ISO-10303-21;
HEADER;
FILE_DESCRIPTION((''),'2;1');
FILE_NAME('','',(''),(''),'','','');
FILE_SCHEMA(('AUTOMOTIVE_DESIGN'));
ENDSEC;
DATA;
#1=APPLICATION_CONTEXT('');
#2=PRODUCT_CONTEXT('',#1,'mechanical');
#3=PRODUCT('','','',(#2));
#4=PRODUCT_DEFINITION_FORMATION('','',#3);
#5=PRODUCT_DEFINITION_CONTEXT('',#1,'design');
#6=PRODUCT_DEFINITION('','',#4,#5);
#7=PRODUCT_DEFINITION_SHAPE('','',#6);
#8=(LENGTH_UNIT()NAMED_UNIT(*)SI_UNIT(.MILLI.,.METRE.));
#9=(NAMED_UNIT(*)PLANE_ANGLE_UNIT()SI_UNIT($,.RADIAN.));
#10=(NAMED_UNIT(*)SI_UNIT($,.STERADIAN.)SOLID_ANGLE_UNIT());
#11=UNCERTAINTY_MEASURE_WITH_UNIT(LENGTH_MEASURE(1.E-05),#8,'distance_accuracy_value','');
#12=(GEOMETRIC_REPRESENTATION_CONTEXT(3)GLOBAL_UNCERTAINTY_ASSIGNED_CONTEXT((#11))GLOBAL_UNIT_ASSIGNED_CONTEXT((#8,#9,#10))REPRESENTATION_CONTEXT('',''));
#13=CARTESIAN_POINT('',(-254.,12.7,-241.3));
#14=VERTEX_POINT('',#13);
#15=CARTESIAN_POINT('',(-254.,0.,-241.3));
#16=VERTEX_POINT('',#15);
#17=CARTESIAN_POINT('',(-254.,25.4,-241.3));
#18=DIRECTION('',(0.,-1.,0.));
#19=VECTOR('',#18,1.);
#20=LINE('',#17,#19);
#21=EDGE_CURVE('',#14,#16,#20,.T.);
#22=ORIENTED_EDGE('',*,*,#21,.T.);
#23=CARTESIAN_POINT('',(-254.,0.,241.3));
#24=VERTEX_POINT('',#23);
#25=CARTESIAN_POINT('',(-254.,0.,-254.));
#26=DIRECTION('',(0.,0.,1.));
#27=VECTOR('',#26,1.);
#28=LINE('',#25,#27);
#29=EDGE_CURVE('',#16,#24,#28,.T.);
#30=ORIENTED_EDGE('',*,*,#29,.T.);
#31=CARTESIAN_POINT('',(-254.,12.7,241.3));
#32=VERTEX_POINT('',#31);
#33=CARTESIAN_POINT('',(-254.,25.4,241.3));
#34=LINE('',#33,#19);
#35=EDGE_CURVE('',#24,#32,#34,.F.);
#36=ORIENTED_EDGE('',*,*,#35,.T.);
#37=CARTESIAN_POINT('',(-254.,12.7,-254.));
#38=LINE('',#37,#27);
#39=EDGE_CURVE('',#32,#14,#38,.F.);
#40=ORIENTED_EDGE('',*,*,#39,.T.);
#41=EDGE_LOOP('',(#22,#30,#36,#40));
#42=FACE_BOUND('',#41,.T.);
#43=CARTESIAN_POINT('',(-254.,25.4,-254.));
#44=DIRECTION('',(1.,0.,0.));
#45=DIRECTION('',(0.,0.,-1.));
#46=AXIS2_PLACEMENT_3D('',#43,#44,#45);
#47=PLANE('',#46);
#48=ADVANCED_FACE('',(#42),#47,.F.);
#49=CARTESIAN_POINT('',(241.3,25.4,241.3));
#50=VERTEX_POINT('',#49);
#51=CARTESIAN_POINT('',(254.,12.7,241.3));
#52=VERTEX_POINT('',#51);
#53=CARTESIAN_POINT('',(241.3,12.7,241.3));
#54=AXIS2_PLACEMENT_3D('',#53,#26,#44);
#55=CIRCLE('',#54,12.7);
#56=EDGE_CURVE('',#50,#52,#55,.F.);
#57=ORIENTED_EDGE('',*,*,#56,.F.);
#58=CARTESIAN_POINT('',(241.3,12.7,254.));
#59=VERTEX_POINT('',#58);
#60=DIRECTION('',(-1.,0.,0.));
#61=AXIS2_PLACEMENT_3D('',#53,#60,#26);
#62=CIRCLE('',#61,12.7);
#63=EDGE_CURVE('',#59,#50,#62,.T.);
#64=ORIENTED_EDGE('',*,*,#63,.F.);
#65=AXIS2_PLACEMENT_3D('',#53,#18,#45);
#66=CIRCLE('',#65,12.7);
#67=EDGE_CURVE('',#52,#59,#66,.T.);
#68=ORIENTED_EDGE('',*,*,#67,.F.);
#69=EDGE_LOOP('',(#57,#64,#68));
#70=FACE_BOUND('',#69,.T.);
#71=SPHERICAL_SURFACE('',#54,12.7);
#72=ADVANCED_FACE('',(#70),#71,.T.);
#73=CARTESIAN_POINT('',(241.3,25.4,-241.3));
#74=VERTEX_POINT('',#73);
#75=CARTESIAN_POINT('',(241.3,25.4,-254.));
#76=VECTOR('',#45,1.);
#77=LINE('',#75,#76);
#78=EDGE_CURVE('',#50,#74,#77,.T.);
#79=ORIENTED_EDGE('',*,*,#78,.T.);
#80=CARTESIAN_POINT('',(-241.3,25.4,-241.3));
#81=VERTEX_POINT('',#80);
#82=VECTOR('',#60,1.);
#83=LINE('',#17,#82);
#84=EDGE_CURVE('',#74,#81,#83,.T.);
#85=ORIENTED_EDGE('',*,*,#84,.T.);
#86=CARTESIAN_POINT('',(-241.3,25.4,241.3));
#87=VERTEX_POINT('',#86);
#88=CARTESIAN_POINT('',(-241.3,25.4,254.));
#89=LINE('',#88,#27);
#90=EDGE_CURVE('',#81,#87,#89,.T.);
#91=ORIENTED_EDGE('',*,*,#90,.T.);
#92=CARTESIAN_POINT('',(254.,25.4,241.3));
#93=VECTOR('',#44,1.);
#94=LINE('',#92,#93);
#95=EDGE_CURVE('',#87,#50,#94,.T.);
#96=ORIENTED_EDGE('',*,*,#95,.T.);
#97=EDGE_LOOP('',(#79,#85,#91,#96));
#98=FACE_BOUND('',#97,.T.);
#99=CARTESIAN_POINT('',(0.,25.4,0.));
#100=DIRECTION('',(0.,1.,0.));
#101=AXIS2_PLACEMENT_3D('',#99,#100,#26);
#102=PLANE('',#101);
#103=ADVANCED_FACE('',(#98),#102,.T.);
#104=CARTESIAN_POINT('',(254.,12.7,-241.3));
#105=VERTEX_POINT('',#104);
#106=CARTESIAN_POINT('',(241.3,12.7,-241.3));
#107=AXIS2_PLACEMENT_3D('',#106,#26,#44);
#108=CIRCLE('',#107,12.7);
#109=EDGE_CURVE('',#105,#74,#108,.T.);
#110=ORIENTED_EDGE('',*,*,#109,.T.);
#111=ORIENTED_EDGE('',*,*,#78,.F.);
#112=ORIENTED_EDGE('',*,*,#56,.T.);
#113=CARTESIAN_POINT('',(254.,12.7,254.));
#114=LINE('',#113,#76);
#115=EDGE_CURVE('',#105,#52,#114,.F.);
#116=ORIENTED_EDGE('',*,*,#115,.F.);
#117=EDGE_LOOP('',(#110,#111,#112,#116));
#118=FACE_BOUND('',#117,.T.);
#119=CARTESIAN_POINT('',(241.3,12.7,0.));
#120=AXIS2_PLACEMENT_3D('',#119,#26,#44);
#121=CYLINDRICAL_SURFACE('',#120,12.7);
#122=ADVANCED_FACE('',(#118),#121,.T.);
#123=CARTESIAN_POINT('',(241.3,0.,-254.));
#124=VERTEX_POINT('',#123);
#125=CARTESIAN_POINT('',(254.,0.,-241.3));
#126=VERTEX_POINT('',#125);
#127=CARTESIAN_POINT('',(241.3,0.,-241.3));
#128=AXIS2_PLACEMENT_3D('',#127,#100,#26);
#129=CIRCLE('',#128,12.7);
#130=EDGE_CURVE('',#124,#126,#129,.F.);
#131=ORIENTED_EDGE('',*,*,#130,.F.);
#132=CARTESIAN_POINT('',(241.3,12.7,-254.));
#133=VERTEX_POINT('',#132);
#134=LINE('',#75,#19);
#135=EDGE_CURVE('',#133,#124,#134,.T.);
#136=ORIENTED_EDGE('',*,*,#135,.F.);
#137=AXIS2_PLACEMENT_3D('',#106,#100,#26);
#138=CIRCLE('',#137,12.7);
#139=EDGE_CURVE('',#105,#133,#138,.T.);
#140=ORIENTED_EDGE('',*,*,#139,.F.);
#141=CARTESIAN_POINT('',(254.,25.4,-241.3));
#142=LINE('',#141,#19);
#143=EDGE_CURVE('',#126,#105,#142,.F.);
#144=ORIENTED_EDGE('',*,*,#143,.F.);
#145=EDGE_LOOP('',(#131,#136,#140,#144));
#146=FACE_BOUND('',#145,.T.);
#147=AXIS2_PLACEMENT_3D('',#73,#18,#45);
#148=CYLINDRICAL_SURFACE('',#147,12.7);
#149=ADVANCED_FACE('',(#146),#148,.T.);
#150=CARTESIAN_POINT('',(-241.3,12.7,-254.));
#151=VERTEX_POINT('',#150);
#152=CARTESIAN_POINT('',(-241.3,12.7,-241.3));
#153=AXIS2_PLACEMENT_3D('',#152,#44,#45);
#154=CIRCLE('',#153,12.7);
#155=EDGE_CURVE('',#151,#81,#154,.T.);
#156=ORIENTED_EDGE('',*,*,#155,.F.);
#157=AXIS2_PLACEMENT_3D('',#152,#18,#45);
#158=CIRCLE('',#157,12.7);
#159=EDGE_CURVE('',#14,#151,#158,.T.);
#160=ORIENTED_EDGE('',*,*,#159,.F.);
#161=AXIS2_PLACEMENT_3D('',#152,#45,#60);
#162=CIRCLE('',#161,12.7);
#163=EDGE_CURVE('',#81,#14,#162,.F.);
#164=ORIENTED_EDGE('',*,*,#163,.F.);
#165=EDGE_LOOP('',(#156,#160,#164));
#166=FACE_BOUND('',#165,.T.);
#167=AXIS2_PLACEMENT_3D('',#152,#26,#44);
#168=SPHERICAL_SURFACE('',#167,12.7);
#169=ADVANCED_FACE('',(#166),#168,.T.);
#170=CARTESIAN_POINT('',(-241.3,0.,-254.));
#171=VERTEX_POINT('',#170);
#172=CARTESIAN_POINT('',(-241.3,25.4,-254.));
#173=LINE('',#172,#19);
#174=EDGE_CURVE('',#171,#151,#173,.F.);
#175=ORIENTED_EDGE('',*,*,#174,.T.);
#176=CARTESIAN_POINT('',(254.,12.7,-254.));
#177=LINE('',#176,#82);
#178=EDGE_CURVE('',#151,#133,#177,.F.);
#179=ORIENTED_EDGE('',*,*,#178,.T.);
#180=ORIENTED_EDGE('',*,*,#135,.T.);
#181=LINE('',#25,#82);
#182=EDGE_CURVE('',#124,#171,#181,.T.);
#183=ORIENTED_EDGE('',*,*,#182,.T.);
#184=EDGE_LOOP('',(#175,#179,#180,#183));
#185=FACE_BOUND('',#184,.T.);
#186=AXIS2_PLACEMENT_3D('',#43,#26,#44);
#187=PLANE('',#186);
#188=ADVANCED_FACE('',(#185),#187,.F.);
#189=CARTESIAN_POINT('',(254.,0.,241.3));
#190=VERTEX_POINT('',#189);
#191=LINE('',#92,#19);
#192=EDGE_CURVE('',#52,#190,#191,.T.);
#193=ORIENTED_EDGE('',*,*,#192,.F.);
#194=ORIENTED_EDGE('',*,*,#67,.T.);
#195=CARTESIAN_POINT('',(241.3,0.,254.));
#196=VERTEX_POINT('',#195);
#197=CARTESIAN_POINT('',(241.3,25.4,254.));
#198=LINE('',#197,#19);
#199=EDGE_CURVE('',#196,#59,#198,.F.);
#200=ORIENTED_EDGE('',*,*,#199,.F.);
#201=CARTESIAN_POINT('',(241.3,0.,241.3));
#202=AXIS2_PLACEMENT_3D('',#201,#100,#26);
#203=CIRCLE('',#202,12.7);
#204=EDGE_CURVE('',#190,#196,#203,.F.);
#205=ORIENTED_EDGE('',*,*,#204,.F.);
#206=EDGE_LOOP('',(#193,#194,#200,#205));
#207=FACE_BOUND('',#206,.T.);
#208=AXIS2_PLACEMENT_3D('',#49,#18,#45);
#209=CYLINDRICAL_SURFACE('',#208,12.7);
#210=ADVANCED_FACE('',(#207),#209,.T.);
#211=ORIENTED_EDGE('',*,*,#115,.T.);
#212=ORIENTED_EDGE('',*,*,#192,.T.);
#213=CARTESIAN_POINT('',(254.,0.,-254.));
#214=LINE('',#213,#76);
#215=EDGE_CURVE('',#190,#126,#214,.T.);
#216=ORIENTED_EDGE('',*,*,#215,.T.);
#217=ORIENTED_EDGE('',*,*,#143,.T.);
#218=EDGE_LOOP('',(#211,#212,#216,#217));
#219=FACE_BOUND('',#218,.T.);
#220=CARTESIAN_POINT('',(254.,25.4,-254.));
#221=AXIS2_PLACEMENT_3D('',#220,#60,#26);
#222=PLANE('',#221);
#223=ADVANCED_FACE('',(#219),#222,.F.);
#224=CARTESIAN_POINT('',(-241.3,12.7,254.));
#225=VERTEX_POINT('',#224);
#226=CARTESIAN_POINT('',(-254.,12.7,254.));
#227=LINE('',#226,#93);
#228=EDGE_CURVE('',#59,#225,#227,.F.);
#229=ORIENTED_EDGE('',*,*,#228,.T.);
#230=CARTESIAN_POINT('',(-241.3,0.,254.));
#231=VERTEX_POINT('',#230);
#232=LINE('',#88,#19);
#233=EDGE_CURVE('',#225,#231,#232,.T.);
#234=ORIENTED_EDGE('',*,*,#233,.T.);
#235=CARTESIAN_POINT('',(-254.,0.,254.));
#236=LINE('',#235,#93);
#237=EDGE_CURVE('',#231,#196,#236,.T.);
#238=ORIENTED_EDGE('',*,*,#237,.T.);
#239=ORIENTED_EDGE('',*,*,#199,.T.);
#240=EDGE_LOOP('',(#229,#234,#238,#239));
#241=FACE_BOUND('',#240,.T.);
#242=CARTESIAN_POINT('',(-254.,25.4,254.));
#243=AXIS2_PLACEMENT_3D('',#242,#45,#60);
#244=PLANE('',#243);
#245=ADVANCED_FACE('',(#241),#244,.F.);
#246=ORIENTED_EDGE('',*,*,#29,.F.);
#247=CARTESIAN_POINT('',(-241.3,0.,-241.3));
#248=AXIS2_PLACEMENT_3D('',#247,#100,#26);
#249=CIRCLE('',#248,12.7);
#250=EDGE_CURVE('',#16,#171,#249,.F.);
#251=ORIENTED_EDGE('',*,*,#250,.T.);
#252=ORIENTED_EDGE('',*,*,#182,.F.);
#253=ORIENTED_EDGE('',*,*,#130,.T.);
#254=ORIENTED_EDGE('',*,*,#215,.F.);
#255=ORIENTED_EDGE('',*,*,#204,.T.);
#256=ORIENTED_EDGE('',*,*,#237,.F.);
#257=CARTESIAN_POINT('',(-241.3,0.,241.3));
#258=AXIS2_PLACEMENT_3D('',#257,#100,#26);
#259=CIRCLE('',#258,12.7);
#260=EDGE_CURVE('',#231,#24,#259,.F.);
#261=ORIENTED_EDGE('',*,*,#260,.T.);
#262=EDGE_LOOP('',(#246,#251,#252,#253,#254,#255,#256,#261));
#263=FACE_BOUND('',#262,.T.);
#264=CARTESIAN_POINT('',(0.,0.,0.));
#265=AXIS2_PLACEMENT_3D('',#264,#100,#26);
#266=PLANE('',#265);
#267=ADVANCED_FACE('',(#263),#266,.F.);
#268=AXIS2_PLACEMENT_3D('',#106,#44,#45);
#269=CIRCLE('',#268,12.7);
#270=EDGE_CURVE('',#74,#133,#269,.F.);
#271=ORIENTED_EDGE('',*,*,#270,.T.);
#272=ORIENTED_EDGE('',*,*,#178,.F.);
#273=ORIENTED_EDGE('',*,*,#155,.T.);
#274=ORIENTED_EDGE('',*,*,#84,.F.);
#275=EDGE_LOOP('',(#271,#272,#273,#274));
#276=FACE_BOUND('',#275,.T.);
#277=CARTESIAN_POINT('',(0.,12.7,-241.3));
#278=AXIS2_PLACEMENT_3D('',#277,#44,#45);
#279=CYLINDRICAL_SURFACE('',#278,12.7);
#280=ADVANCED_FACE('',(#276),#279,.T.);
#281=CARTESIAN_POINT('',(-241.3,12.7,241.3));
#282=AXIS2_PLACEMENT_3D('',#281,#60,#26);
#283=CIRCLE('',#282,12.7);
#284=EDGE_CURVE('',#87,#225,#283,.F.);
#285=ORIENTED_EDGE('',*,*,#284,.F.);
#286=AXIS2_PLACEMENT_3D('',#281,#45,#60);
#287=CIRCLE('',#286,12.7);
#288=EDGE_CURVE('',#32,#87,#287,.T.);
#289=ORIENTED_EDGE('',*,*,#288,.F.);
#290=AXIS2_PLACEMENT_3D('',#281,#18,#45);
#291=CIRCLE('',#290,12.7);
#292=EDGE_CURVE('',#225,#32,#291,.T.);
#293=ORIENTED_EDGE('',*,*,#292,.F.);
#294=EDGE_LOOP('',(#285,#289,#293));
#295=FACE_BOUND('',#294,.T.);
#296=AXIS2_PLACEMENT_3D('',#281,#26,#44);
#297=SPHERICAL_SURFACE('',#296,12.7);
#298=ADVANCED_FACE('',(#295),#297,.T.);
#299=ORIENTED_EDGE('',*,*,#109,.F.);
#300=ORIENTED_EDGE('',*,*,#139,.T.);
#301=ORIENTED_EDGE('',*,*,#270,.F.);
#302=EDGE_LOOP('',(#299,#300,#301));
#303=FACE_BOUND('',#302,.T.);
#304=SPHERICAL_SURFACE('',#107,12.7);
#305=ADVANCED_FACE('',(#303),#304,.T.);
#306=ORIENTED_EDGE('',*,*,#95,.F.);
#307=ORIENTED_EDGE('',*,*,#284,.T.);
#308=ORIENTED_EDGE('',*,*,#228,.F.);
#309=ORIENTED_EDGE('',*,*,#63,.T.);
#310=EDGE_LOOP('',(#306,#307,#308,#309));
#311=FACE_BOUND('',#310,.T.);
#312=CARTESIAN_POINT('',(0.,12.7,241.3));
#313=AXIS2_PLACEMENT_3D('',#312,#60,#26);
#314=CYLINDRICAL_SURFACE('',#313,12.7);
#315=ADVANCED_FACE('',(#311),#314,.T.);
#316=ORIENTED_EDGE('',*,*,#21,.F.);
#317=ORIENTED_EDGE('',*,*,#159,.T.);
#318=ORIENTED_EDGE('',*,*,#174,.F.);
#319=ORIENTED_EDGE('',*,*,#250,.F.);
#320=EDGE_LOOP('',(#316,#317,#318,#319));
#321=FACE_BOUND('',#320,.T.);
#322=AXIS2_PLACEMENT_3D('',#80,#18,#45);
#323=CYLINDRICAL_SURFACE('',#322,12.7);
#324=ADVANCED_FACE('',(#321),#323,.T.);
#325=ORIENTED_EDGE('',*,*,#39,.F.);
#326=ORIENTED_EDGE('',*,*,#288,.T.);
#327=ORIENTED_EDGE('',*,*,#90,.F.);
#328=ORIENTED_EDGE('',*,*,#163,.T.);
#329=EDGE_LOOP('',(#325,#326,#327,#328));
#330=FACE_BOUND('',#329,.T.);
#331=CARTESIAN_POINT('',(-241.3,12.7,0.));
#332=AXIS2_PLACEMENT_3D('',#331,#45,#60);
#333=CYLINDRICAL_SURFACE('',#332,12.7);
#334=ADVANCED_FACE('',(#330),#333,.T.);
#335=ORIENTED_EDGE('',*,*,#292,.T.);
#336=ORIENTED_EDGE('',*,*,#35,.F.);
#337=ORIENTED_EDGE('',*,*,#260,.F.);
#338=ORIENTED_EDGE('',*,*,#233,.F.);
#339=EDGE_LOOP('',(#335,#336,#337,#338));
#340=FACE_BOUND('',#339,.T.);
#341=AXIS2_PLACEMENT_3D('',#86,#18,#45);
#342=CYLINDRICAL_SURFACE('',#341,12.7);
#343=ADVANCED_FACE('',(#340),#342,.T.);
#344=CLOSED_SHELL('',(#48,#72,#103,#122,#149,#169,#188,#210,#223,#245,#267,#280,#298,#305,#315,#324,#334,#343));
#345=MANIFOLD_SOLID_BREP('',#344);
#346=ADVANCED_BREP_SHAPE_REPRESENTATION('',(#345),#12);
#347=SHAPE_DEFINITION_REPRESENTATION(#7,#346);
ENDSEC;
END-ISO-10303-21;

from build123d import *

# Parameters (mm, degrees)
SKETCH1_W           = 508
SKETCH1_H           = 508
BOSS_EXTRUDE1_DEPTH = 25.4
FILLET1_R           = 12.7
FILLET2_R           = 12.7


with BuildPart() as part:
    # Sketch1 → Boss-Extrude1 (new body)
    with BuildSketch(Plane(origin=(0, 0, 0), x_dir=(1, 0, 0), z_dir=(0, 1, 0))):
        Rectangle(SKETCH1_W, SKETCH1_H)
    extrude(amount=BOSS_EXTRUDE1_DEPTH)

    # Fillet1
    fillet1_edges = [part.edges().sort_by_distance(p)[0] for p in [
        (-254, 25.4, 0),
        (0, 25.4, 254),
        (254, 25.4, 0),
        (0, 25.4, -254),
    ]]
    fillet(fillet1_edges, radius=FILLET1_R)

    # Fillet2
    # the kernel refuses this fillet: 12.7 mm, written as the material it takes off along each edge
    with BuildSketch(Plane(origin=(241.3, 12.7, 241.3), x_dir=(0, 0, 1), z_dir=(1, 0, 0))) as fillet2_piece_1_section:
        Polygon((0, 0), (FILLET2_R, 0), (FILLET2_R, -FILLET2_R), (0, -FILLET2_R), align=None)
    fillet2_piece_1 = extrude(amount=FILLET2_R, mode=Mode.PRIVATE)
    fillet2_piece_1 = fillet2_piece_1 - Plane(origin=(241.3, 12.7, 241.3), x_dir=(0, -0.7071067811865475, -0.7071067811865475), z_dir=(1, 0, 0)) * Sphere(FILLET2_R, mode=Mode.PRIVATE)
    add(fillet2_piece_1, mode=Mode.SUBTRACT)
    with BuildSketch(Plane(origin=(-241.3, 12.7, 241.3), x_dir=(0, 0, 1), z_dir=(-1, 0, 0))) as fillet2_piece_2_section:
        Polygon((0, 0), (FILLET2_R, 0), (FILLET2_R, FILLET2_R), (0, FILLET2_R), align=None)
    fillet2_piece_2 = extrude(amount=FILLET2_R, mode=Mode.PRIVATE)
    fillet2_piece_2 = fillet2_piece_2 - Plane(origin=(-241.3, 12.7, 241.3), x_dir=(0, -0.7071067811865475, -0.7071067811865475), z_dir=(-1, 0, 0)) * Sphere(FILLET2_R, mode=Mode.PRIVATE)
    add(fillet2_piece_2, mode=Mode.SUBTRACT)
    with BuildSketch(Plane(origin=(241.3, 12.7, -241.3), x_dir=(1, 0, 0), z_dir=(0, 0, -1))) as fillet2_piece_3_section:
        Polygon((0, 0), (FILLET2_R, 0), (FILLET2_R, -FILLET2_R), (0, -FILLET2_R), align=None)
    fillet2_piece_3 = extrude(amount=FILLET2_R, mode=Mode.PRIVATE)
    fillet2_piece_3 = fillet2_piece_3 - Plane(origin=(241.3, 12.7, -241.3), x_dir=(-0.7071067811865475, -0.7071067811865475, 0), z_dir=(0, 0, -1)) * Sphere(FILLET2_R, mode=Mode.PRIVATE)
    add(fillet2_piece_3, mode=Mode.SUBTRACT)
    with BuildSketch(Plane(origin=(-241.3, 12.7, -241.3), x_dir=(-1, 0, 0), z_dir=(0, 0, -1))) as fillet2_piece_4_section:
        Polygon((0, 0), (FILLET2_R, 0), (FILLET2_R, FILLET2_R), (0, FILLET2_R), align=None)
    fillet2_piece_4 = extrude(amount=FILLET2_R, mode=Mode.PRIVATE)
    fillet2_piece_4 = fillet2_piece_4 - Plane(origin=(-241.3, 12.7, -241.3), x_dir=(0.7071067811865475, -0.7071067811865475, 0), z_dir=(0, 0, -1)) * Sphere(FILLET2_R, mode=Mode.PRIVATE)
    add(fillet2_piece_4, mode=Mode.SUBTRACT)
    with BuildSketch(Plane(origin=(-254, -31.75, -254), x_dir=(1, 0, 0), z_dir=(0, 1, 0)), Plane(origin=(-254, -31.75, 254), x_dir=(0, 0, -1), z_dir=(0, 1, 0))) as fillet2_piece_5:
        with BuildLine():
            CenterArc((FILLET2_R, -FILLET2_R), FILLET2_R, 90, 90)
            Line((0, -FILLET2_R), (0, 0))
            Line((0, 0), (FILLET2_R, 0))
        make_face()
    extrude(amount=44.45, mode=Mode.SUBTRACT)
    with BuildSketch(Plane(origin=(254, -31.75, -254), x_dir=(-1, 0, 0), z_dir=(0, 1, 0)), Plane(origin=(254, -31.75, 254), x_dir=(0, 0, -1), z_dir=(0, 1, 0))) as fillet2_piece_6:
        with BuildLine():
            CenterArc((FILLET2_R, FILLET2_R), FILLET2_R, 180, 90)
            Line((0, FILLET2_R), (0, 0))
            Line((0, 0), (FILLET2_R, 0))
        make_face()
    extrude(amount=44.45, mode=Mode.SUBTRACT)


solid = part.part
